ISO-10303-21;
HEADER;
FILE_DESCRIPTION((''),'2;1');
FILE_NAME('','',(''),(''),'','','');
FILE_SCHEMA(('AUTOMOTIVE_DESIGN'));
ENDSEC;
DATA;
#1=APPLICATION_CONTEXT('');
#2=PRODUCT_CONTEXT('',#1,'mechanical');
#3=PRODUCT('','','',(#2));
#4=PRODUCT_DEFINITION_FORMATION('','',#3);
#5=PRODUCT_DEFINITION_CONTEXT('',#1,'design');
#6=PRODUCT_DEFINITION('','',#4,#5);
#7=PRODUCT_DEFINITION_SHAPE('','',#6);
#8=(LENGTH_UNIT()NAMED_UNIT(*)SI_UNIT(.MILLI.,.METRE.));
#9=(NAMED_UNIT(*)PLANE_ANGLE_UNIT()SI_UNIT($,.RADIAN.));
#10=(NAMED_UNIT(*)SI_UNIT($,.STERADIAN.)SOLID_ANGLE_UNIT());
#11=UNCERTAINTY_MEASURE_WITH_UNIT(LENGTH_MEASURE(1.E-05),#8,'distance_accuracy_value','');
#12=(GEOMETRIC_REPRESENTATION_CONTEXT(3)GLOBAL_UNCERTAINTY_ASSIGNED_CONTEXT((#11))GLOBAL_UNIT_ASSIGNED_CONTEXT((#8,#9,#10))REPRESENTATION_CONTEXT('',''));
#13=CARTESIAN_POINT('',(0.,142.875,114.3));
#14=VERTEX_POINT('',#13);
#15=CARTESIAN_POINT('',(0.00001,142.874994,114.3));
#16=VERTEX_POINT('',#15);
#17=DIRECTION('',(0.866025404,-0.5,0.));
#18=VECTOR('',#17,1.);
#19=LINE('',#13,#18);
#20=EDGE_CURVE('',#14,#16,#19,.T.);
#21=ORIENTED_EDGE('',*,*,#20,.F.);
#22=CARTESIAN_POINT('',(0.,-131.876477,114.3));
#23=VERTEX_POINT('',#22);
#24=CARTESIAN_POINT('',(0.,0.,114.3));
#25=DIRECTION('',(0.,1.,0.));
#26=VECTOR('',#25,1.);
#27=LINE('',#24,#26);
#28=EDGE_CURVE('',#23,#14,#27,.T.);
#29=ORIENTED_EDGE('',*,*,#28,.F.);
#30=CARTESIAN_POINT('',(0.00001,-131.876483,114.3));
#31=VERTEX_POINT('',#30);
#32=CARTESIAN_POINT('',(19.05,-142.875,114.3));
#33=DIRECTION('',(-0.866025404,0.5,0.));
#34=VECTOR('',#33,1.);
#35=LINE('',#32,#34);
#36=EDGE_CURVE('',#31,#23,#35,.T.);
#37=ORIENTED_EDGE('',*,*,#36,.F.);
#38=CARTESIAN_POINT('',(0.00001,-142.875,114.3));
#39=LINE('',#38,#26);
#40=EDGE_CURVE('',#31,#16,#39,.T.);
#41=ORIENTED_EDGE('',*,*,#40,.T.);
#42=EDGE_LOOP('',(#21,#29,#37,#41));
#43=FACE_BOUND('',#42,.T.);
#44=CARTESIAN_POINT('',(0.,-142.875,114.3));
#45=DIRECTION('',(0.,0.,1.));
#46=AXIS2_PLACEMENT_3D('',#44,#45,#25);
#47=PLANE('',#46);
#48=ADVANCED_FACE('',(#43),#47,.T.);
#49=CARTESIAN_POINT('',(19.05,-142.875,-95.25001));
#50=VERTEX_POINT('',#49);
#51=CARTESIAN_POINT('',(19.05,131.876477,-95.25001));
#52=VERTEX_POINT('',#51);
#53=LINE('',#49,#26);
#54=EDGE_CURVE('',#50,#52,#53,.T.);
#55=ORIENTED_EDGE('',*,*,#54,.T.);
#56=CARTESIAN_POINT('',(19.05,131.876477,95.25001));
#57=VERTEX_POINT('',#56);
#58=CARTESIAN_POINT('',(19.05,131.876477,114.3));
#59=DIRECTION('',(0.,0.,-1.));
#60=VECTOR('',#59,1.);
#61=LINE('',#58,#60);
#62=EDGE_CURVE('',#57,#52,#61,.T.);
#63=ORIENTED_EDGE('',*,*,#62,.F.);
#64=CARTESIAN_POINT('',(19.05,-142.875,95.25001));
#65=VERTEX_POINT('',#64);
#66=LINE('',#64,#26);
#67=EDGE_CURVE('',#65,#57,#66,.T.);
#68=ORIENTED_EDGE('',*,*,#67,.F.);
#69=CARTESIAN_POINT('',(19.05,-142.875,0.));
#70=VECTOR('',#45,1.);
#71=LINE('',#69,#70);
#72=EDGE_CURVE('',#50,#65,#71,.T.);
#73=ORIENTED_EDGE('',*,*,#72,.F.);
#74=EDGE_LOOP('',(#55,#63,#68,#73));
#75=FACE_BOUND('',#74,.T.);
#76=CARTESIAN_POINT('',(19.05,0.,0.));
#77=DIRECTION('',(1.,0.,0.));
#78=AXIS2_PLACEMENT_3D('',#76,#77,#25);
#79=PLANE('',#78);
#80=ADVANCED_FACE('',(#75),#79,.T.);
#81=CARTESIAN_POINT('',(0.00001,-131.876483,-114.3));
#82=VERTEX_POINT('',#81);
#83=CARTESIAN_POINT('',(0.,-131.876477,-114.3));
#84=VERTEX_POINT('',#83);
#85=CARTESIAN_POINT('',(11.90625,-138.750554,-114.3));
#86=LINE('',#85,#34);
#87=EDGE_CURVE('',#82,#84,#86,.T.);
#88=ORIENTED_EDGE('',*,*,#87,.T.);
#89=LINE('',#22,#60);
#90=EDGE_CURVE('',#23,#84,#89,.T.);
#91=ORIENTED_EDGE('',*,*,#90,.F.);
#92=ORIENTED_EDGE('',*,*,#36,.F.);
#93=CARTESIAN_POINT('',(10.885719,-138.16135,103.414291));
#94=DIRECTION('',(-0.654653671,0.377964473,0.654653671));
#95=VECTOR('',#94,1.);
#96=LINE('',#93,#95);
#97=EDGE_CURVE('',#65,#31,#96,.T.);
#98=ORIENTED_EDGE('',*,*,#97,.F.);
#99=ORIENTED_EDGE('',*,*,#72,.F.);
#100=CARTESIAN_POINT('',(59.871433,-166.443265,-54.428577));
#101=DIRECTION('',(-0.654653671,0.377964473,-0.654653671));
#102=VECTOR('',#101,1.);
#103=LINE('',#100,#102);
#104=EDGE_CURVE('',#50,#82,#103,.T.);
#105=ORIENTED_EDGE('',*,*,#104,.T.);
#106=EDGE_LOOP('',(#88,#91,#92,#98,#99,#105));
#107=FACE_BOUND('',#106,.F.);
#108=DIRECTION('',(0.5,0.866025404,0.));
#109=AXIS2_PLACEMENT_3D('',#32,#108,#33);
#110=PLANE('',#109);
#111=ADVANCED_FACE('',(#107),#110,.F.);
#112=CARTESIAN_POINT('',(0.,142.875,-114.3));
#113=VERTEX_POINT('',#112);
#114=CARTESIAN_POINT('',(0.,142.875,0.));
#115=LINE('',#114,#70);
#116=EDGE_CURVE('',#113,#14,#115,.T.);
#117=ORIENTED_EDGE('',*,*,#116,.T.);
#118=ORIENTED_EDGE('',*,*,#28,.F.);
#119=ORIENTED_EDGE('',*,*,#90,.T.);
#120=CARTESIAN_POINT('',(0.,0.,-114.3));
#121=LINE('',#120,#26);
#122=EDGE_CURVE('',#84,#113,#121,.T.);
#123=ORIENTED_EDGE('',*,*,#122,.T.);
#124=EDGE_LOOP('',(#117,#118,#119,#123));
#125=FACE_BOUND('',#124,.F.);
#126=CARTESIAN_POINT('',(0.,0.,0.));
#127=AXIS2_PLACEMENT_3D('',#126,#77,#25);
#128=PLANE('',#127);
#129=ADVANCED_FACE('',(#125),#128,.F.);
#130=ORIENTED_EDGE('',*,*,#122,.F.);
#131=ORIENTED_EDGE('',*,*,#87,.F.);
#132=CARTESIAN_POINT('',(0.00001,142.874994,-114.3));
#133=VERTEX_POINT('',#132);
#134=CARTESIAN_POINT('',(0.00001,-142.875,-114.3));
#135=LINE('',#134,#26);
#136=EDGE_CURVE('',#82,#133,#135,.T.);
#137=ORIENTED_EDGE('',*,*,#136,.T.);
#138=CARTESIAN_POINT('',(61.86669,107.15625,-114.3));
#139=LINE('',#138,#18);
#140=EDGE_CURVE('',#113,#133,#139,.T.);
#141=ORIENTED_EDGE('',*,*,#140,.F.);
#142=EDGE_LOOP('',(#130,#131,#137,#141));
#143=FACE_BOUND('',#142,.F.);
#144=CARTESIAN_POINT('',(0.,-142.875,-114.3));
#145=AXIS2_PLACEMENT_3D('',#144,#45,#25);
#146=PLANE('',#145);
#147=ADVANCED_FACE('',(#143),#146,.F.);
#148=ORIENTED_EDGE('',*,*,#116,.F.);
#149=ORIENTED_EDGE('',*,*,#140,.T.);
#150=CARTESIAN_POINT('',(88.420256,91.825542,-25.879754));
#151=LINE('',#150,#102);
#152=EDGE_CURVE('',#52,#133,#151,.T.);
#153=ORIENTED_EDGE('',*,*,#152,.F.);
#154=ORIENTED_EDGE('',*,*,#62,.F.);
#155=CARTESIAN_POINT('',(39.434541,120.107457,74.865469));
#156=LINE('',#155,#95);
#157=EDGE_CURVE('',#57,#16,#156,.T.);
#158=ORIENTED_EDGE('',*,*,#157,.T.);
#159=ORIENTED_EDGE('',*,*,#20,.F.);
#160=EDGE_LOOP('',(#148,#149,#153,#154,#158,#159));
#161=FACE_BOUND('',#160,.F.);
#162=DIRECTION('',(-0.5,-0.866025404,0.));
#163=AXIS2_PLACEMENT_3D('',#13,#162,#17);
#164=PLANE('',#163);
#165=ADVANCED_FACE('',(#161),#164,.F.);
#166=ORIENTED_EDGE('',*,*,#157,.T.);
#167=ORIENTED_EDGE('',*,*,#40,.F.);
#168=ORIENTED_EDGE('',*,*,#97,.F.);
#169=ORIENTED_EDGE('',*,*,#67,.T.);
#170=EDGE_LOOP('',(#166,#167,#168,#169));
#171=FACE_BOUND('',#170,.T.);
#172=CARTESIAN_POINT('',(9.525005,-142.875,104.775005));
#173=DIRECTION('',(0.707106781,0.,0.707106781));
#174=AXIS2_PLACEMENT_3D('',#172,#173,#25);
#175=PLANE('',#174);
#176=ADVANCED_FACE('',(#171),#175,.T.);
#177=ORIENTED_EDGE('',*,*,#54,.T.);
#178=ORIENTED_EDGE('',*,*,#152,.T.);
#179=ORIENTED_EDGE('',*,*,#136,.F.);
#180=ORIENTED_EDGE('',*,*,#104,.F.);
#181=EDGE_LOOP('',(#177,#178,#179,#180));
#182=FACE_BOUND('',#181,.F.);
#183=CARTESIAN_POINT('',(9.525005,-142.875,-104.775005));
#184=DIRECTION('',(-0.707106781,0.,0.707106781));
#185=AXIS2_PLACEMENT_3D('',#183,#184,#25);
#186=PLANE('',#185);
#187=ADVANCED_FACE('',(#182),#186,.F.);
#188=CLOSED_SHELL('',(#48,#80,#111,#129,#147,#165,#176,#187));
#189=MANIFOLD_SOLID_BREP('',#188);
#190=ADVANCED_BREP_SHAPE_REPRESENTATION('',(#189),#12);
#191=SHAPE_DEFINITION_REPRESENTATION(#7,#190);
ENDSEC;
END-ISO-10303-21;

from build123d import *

# Parameters (mm, degrees)
F0_W     = 285.75
F0_H     = 228.6
F1_DEPTH = 19.05
F3_DEPTH = 228.601
F4_SIZE  = 19.04999


# Not quite as in the source:
# - a fillet or chamfer is up to 0.001 mm smaller than in the source, because OpenCascade refuses the exact size


with BuildPart() as f1:
    # F0 (on Right) → F1 (new body)
    with BuildSketch(Plane.YZ):
        Rectangle(F0_W, F0_H)
    extrude(amount=F1_DEPTH)

    # F2 (on face) → F3 (cut, through all)
    with BuildSketch(Plane.XY.offset(114.3)):
        Polygon((0, -142.875), (19.05, -142.875), (0, -131.8764773719), align=None)
        Polygon((19.05, 142.875), (0, 142.875), (19.05, 131.8764773719), align=None)
    extrude(amount=-F3_DEPTH, mode=Mode.SUBTRACT)

    # F4 (size 19.05 in the source; OpenCascade refuses exactly that, so slightly less here)
    f4_edges = [f1.edges().sort_by_distance(p)[0] for p in [
        (19.05, -5.499261, 114.3),
        (19.05, -5.499261, -114.3),
    ]]
    chamfer(f4_edges, length=F4_SIZE)


solid = f1.part
